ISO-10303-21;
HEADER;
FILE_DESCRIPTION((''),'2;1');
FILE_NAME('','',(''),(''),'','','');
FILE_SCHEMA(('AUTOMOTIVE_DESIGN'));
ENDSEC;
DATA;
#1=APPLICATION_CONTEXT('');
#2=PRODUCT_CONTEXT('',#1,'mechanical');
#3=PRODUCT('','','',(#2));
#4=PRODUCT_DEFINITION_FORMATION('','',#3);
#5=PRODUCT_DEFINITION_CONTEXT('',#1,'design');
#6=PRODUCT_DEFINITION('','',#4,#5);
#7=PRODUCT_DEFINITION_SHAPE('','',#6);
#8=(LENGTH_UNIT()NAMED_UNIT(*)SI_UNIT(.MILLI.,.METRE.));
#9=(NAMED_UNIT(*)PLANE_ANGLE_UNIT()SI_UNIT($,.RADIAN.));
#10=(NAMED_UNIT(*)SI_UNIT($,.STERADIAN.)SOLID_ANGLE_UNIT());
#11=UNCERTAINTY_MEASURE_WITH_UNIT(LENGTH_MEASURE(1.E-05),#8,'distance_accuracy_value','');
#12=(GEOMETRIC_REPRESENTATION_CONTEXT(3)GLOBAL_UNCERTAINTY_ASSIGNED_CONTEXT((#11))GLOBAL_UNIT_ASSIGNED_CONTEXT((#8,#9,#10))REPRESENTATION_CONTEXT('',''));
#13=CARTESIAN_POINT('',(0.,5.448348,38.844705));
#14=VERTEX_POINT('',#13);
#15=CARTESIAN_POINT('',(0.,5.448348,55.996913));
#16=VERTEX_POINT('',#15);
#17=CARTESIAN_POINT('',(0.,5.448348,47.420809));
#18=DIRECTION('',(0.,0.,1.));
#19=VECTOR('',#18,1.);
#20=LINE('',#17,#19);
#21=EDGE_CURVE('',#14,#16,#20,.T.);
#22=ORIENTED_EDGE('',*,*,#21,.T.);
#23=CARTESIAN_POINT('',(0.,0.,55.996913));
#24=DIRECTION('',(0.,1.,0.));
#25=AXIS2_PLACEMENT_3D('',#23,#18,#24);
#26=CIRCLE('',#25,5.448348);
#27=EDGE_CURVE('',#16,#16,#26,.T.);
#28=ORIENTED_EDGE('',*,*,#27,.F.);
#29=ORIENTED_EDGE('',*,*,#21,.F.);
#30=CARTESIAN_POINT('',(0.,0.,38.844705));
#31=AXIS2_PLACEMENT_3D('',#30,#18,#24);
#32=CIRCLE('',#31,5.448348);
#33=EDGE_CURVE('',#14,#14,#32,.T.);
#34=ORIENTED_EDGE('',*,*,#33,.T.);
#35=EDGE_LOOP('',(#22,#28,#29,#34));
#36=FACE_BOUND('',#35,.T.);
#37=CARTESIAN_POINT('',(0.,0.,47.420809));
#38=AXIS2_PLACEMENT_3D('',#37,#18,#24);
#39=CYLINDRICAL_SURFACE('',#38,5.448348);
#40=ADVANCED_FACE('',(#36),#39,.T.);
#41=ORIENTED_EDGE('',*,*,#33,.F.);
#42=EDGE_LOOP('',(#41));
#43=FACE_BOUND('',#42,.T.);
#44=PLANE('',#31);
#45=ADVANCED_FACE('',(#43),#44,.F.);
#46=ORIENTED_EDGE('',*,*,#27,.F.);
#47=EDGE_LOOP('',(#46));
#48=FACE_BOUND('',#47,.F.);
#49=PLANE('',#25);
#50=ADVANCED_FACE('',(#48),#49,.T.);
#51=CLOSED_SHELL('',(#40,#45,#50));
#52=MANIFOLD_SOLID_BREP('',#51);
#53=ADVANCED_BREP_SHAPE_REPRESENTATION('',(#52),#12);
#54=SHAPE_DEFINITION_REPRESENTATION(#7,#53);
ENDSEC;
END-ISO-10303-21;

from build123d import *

# Parameters (mm, degrees)
F2_W = 5.4483478889
F2_H = 17.1522088349


# Not quite as in the source:
# - a feature of the source that left no trace in its solid (it failed there, or was rolled back) is left out


with BuildPart() as f3:
    # F2 (on Right) → F3 (revolve)
    with BuildSketch(Plane.YZ):
        with Locations((2.7241739444, 47.4208090454)):
            Rectangle(F2_W, F2_H)
    revolve(axis=Axis((0, 0, 47.4208090454), (0, 0, 1)))


solid = f3.part
